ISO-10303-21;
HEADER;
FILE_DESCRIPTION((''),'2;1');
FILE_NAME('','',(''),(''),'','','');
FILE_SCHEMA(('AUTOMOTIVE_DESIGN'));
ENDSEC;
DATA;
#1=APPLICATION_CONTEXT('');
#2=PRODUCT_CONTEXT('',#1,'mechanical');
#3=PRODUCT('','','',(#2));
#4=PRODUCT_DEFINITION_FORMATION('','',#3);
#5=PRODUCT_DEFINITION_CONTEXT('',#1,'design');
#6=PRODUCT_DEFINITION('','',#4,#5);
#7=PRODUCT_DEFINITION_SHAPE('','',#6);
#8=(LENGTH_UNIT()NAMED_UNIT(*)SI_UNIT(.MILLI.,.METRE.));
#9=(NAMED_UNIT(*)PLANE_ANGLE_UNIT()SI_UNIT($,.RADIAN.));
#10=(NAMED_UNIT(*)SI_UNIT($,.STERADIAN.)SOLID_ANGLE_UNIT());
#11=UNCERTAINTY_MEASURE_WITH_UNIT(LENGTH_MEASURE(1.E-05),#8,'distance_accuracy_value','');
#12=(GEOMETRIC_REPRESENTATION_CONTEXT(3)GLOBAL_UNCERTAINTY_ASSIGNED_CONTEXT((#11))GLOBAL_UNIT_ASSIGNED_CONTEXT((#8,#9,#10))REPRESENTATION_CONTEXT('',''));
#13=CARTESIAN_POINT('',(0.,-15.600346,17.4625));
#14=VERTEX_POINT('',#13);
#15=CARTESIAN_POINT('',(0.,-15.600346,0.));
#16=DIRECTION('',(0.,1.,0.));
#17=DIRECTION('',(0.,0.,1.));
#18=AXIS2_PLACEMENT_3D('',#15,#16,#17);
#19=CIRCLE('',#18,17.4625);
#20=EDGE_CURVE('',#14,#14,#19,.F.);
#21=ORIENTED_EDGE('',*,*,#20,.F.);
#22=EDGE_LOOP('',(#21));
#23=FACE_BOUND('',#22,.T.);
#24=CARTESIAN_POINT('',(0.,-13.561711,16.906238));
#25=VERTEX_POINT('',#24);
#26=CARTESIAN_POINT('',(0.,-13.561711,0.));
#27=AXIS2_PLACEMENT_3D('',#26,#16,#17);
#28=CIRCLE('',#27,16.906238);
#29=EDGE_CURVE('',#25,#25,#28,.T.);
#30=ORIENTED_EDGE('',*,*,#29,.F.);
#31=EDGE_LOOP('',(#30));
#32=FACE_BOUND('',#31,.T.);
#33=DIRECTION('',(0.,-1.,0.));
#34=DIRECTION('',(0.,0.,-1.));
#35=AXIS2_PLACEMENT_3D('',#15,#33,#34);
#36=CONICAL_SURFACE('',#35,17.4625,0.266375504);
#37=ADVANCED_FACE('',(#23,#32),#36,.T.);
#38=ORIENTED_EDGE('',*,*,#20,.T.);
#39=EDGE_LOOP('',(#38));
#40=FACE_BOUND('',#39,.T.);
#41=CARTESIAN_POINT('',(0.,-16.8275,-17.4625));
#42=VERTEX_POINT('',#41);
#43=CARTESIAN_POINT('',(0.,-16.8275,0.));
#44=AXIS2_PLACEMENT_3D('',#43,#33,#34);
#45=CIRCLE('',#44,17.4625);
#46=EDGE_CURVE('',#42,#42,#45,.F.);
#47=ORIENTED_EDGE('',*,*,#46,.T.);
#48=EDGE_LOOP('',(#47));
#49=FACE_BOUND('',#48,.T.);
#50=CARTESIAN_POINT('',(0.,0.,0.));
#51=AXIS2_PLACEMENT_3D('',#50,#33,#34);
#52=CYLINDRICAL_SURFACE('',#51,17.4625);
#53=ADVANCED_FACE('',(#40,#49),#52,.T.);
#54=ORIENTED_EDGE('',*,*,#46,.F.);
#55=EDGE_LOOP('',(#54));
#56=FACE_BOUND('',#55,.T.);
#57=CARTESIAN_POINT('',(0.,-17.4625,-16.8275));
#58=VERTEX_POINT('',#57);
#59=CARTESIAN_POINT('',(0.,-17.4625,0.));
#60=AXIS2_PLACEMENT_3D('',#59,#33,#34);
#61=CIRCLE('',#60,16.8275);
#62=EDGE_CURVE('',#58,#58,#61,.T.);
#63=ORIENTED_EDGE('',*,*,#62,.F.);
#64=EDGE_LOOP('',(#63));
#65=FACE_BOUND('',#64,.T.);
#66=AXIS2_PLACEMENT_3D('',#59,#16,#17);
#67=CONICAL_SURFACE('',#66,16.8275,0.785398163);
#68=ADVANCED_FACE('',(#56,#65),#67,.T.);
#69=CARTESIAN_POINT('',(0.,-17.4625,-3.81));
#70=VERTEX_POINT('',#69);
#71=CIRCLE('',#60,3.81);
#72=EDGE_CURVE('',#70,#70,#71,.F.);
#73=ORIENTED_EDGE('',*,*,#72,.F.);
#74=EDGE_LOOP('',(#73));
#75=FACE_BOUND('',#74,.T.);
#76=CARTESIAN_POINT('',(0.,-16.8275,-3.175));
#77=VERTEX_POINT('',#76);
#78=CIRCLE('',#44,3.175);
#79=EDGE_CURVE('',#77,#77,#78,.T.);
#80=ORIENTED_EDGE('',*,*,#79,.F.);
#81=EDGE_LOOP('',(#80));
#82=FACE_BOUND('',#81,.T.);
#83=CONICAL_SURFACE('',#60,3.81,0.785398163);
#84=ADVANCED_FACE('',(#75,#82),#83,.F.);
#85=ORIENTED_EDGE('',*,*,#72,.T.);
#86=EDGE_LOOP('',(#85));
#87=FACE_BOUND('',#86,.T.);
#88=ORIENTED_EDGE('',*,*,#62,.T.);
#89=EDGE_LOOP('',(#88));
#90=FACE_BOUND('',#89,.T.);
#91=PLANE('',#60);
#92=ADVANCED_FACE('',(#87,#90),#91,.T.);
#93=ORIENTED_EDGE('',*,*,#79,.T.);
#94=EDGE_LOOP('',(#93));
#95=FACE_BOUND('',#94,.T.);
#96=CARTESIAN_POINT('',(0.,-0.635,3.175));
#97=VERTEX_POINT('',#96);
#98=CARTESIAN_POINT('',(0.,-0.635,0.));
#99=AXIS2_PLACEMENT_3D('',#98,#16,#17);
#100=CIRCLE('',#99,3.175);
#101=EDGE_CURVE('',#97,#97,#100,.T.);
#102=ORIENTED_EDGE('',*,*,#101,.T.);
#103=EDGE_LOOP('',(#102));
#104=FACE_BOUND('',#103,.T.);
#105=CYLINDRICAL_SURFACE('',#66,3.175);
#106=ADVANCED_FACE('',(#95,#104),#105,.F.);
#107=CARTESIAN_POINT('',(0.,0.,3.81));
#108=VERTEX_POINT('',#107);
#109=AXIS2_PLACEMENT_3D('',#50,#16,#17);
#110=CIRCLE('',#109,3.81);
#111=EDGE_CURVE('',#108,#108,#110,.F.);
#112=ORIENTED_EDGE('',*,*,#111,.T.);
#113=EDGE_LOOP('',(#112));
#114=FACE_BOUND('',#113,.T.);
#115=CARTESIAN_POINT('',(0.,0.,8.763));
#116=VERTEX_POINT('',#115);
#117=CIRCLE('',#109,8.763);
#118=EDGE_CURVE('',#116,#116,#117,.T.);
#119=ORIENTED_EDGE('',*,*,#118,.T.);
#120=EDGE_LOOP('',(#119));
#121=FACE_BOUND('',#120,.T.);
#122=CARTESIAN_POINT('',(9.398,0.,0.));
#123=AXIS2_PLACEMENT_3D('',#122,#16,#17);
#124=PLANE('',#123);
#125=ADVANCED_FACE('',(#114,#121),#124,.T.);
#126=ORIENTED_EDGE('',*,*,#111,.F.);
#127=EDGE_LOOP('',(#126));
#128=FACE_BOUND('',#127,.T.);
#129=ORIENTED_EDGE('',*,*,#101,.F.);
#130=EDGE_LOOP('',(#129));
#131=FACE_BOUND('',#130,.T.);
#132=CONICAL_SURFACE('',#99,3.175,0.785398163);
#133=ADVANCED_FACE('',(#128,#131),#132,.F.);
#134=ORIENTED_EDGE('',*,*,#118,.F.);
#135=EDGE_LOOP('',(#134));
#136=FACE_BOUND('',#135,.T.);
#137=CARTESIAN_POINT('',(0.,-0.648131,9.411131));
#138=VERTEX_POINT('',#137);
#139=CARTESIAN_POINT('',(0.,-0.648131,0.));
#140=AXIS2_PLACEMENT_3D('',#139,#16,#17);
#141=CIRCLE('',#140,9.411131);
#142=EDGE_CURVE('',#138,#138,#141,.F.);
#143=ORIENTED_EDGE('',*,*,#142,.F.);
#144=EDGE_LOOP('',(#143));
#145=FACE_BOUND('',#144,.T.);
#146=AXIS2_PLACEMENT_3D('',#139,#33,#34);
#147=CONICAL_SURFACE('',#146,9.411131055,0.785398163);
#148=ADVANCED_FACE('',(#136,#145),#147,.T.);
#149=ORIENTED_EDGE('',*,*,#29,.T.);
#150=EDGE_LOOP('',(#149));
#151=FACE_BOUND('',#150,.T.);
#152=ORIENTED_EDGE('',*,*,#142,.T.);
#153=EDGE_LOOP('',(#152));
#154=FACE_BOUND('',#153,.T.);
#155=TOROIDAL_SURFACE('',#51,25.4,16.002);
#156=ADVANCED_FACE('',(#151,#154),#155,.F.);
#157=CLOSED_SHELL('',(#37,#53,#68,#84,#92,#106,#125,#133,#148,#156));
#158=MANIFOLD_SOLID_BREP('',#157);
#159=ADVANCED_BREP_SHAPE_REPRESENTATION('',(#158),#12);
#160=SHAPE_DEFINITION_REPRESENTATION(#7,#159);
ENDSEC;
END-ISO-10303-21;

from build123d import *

# Parameters (mm, degrees)
CUT_EXTRUDE1_DEPTH      = 31.245937227
CUT_EXTRUDE1_DEPTH_BACK = 31.245937227
SKETCH2_R               = 3.175
CHAMFER1_SIZE           = 0.635
CHAMFER1_SIZE_2         = 1.705739105


with BuildPart() as part:
    # Sketch1 → Revolve1 (revolve)
    with BuildSketch(Plane.XY, mode=Mode.PRIVATE) as revolve1_sk:
        with BuildLine():
            Line((17.4625, -17.4625), (17.4625, -13.894606786))
            ThreePointArc((17.4625, -13.894606786), (11.560204499, -8.032687253), (9.398, 0))
            Line((9.398, 0), (0, 0))
            Line((0, 0), (0, -17.4625))
            Line((0, -17.4625), (17.4625, -17.4625))
        make_face()
    revolve(revolve1_sk.sketch.rotate(Axis((0, 0, 0), (0, 1, 0)), 90), axis=Axis((0, 0, 0), (0, 1, 0)))

    # Sketch2 → Cut-Extrude1 (cut, two sides: drawn at the far end of the back side and taken through both)
    with BuildSketch(Plane(origin=(0, 0, 0), x_dir=(1, 0, 0), z_dir=(0, 1, 0)).offset(-CUT_EXTRUDE1_DEPTH_BACK)):
        with Locations(Location((0, 0, 0), (0, 0, 270))):
            Circle(SKETCH2_R)
    extrude(amount=CUT_EXTRUDE1_DEPTH + CUT_EXTRUDE1_DEPTH_BACK, mode=Mode.SUBTRACT)

    # Chamfer1
    # the kernel refuses this chamfer: 1.705739105, 0.635 mm, written as the material it takes off along each edge
    with BuildSketch(Plane(origin=(0, 0, 0), x_dir=(0, 0, 1), z_dir=(-1, 0, 0))) as chamfer1_piece_1:
        Polygon((3.175, -CHAMFER1_SIZE), (3.175 + CHAMFER1_SIZE, 0), (3.175, 0), align=None)
    revolve(axis=Axis((0, 0, 0), (0, 1, 0)), mode=Mode.SUBTRACT)
    with BuildSketch(Plane(origin=(0, -17.4625, 0), x_dir=(0, 0, 1), z_dir=(-1, 0, 0))) as chamfer1_piece_2:
        Polygon((3.175 + CHAMFER1_SIZE, 0), (3.175, CHAMFER1_SIZE), (3.175, 0), align=None)
    revolve(axis=Axis((0, -17.4625, 0), (0, 1, 0)), mode=Mode.SUBTRACT)
    with BuildSketch(Plane(origin=(0, -17.4625, 0), x_dir=(0, 0, -1), z_dir=(1, 0, 0))) as chamfer1_piece_3:
        Polygon((17.4625, CHAMFER1_SIZE), (17.4625 - CHAMFER1_SIZE, 0), (17.4625, 0), align=None)
    revolve(axis=Axis((0, -17.4625, 0), (0, 1, 0)), mode=Mode.SUBTRACT)
    with BuildSketch(Plane(origin=(0, 0, 0), x_dir=(0, 0, -1), z_dir=(1, 0, 0))) as chamfer1_piece_4:
        with BuildLine():
            Line((9.411131055, -0.648131055), (9.398 - CHAMFER1_SIZE, 0))
            Line((9.398 - CHAMFER1_SIZE, 0), (9.398, 0))
            ThreePointArc((9.398, 0), (9.401471415, -0.333297329), (9.411131055, -0.648131055))
        make_face()
    revolve(axis=Axis((0, 0, 0), (0, 1, 0)), mode=Mode.SUBTRACT)
    with BuildSketch(Plane(origin=(0, -13.894606786, 0), x_dir=(0, 0, -1), z_dir=(1, 0, 0))) as chamfer1_piece_5:
        with BuildLine():
            Line((17.4625, -CHAMFER1_SIZE_2), (16.906238382, 0.332895332))
            ThreePointArc((16.906238382, 0.332895332), (17.161543174, 0.176303935), (17.4625, 0))
            Line((17.4625, 0), (17.4625, -CHAMFER1_SIZE_2))
        make_face()
    revolve(axis=Axis((0, -13.894606786, 0), (0, 1, 0)), mode=Mode.SUBTRACT)


solid = part.part
